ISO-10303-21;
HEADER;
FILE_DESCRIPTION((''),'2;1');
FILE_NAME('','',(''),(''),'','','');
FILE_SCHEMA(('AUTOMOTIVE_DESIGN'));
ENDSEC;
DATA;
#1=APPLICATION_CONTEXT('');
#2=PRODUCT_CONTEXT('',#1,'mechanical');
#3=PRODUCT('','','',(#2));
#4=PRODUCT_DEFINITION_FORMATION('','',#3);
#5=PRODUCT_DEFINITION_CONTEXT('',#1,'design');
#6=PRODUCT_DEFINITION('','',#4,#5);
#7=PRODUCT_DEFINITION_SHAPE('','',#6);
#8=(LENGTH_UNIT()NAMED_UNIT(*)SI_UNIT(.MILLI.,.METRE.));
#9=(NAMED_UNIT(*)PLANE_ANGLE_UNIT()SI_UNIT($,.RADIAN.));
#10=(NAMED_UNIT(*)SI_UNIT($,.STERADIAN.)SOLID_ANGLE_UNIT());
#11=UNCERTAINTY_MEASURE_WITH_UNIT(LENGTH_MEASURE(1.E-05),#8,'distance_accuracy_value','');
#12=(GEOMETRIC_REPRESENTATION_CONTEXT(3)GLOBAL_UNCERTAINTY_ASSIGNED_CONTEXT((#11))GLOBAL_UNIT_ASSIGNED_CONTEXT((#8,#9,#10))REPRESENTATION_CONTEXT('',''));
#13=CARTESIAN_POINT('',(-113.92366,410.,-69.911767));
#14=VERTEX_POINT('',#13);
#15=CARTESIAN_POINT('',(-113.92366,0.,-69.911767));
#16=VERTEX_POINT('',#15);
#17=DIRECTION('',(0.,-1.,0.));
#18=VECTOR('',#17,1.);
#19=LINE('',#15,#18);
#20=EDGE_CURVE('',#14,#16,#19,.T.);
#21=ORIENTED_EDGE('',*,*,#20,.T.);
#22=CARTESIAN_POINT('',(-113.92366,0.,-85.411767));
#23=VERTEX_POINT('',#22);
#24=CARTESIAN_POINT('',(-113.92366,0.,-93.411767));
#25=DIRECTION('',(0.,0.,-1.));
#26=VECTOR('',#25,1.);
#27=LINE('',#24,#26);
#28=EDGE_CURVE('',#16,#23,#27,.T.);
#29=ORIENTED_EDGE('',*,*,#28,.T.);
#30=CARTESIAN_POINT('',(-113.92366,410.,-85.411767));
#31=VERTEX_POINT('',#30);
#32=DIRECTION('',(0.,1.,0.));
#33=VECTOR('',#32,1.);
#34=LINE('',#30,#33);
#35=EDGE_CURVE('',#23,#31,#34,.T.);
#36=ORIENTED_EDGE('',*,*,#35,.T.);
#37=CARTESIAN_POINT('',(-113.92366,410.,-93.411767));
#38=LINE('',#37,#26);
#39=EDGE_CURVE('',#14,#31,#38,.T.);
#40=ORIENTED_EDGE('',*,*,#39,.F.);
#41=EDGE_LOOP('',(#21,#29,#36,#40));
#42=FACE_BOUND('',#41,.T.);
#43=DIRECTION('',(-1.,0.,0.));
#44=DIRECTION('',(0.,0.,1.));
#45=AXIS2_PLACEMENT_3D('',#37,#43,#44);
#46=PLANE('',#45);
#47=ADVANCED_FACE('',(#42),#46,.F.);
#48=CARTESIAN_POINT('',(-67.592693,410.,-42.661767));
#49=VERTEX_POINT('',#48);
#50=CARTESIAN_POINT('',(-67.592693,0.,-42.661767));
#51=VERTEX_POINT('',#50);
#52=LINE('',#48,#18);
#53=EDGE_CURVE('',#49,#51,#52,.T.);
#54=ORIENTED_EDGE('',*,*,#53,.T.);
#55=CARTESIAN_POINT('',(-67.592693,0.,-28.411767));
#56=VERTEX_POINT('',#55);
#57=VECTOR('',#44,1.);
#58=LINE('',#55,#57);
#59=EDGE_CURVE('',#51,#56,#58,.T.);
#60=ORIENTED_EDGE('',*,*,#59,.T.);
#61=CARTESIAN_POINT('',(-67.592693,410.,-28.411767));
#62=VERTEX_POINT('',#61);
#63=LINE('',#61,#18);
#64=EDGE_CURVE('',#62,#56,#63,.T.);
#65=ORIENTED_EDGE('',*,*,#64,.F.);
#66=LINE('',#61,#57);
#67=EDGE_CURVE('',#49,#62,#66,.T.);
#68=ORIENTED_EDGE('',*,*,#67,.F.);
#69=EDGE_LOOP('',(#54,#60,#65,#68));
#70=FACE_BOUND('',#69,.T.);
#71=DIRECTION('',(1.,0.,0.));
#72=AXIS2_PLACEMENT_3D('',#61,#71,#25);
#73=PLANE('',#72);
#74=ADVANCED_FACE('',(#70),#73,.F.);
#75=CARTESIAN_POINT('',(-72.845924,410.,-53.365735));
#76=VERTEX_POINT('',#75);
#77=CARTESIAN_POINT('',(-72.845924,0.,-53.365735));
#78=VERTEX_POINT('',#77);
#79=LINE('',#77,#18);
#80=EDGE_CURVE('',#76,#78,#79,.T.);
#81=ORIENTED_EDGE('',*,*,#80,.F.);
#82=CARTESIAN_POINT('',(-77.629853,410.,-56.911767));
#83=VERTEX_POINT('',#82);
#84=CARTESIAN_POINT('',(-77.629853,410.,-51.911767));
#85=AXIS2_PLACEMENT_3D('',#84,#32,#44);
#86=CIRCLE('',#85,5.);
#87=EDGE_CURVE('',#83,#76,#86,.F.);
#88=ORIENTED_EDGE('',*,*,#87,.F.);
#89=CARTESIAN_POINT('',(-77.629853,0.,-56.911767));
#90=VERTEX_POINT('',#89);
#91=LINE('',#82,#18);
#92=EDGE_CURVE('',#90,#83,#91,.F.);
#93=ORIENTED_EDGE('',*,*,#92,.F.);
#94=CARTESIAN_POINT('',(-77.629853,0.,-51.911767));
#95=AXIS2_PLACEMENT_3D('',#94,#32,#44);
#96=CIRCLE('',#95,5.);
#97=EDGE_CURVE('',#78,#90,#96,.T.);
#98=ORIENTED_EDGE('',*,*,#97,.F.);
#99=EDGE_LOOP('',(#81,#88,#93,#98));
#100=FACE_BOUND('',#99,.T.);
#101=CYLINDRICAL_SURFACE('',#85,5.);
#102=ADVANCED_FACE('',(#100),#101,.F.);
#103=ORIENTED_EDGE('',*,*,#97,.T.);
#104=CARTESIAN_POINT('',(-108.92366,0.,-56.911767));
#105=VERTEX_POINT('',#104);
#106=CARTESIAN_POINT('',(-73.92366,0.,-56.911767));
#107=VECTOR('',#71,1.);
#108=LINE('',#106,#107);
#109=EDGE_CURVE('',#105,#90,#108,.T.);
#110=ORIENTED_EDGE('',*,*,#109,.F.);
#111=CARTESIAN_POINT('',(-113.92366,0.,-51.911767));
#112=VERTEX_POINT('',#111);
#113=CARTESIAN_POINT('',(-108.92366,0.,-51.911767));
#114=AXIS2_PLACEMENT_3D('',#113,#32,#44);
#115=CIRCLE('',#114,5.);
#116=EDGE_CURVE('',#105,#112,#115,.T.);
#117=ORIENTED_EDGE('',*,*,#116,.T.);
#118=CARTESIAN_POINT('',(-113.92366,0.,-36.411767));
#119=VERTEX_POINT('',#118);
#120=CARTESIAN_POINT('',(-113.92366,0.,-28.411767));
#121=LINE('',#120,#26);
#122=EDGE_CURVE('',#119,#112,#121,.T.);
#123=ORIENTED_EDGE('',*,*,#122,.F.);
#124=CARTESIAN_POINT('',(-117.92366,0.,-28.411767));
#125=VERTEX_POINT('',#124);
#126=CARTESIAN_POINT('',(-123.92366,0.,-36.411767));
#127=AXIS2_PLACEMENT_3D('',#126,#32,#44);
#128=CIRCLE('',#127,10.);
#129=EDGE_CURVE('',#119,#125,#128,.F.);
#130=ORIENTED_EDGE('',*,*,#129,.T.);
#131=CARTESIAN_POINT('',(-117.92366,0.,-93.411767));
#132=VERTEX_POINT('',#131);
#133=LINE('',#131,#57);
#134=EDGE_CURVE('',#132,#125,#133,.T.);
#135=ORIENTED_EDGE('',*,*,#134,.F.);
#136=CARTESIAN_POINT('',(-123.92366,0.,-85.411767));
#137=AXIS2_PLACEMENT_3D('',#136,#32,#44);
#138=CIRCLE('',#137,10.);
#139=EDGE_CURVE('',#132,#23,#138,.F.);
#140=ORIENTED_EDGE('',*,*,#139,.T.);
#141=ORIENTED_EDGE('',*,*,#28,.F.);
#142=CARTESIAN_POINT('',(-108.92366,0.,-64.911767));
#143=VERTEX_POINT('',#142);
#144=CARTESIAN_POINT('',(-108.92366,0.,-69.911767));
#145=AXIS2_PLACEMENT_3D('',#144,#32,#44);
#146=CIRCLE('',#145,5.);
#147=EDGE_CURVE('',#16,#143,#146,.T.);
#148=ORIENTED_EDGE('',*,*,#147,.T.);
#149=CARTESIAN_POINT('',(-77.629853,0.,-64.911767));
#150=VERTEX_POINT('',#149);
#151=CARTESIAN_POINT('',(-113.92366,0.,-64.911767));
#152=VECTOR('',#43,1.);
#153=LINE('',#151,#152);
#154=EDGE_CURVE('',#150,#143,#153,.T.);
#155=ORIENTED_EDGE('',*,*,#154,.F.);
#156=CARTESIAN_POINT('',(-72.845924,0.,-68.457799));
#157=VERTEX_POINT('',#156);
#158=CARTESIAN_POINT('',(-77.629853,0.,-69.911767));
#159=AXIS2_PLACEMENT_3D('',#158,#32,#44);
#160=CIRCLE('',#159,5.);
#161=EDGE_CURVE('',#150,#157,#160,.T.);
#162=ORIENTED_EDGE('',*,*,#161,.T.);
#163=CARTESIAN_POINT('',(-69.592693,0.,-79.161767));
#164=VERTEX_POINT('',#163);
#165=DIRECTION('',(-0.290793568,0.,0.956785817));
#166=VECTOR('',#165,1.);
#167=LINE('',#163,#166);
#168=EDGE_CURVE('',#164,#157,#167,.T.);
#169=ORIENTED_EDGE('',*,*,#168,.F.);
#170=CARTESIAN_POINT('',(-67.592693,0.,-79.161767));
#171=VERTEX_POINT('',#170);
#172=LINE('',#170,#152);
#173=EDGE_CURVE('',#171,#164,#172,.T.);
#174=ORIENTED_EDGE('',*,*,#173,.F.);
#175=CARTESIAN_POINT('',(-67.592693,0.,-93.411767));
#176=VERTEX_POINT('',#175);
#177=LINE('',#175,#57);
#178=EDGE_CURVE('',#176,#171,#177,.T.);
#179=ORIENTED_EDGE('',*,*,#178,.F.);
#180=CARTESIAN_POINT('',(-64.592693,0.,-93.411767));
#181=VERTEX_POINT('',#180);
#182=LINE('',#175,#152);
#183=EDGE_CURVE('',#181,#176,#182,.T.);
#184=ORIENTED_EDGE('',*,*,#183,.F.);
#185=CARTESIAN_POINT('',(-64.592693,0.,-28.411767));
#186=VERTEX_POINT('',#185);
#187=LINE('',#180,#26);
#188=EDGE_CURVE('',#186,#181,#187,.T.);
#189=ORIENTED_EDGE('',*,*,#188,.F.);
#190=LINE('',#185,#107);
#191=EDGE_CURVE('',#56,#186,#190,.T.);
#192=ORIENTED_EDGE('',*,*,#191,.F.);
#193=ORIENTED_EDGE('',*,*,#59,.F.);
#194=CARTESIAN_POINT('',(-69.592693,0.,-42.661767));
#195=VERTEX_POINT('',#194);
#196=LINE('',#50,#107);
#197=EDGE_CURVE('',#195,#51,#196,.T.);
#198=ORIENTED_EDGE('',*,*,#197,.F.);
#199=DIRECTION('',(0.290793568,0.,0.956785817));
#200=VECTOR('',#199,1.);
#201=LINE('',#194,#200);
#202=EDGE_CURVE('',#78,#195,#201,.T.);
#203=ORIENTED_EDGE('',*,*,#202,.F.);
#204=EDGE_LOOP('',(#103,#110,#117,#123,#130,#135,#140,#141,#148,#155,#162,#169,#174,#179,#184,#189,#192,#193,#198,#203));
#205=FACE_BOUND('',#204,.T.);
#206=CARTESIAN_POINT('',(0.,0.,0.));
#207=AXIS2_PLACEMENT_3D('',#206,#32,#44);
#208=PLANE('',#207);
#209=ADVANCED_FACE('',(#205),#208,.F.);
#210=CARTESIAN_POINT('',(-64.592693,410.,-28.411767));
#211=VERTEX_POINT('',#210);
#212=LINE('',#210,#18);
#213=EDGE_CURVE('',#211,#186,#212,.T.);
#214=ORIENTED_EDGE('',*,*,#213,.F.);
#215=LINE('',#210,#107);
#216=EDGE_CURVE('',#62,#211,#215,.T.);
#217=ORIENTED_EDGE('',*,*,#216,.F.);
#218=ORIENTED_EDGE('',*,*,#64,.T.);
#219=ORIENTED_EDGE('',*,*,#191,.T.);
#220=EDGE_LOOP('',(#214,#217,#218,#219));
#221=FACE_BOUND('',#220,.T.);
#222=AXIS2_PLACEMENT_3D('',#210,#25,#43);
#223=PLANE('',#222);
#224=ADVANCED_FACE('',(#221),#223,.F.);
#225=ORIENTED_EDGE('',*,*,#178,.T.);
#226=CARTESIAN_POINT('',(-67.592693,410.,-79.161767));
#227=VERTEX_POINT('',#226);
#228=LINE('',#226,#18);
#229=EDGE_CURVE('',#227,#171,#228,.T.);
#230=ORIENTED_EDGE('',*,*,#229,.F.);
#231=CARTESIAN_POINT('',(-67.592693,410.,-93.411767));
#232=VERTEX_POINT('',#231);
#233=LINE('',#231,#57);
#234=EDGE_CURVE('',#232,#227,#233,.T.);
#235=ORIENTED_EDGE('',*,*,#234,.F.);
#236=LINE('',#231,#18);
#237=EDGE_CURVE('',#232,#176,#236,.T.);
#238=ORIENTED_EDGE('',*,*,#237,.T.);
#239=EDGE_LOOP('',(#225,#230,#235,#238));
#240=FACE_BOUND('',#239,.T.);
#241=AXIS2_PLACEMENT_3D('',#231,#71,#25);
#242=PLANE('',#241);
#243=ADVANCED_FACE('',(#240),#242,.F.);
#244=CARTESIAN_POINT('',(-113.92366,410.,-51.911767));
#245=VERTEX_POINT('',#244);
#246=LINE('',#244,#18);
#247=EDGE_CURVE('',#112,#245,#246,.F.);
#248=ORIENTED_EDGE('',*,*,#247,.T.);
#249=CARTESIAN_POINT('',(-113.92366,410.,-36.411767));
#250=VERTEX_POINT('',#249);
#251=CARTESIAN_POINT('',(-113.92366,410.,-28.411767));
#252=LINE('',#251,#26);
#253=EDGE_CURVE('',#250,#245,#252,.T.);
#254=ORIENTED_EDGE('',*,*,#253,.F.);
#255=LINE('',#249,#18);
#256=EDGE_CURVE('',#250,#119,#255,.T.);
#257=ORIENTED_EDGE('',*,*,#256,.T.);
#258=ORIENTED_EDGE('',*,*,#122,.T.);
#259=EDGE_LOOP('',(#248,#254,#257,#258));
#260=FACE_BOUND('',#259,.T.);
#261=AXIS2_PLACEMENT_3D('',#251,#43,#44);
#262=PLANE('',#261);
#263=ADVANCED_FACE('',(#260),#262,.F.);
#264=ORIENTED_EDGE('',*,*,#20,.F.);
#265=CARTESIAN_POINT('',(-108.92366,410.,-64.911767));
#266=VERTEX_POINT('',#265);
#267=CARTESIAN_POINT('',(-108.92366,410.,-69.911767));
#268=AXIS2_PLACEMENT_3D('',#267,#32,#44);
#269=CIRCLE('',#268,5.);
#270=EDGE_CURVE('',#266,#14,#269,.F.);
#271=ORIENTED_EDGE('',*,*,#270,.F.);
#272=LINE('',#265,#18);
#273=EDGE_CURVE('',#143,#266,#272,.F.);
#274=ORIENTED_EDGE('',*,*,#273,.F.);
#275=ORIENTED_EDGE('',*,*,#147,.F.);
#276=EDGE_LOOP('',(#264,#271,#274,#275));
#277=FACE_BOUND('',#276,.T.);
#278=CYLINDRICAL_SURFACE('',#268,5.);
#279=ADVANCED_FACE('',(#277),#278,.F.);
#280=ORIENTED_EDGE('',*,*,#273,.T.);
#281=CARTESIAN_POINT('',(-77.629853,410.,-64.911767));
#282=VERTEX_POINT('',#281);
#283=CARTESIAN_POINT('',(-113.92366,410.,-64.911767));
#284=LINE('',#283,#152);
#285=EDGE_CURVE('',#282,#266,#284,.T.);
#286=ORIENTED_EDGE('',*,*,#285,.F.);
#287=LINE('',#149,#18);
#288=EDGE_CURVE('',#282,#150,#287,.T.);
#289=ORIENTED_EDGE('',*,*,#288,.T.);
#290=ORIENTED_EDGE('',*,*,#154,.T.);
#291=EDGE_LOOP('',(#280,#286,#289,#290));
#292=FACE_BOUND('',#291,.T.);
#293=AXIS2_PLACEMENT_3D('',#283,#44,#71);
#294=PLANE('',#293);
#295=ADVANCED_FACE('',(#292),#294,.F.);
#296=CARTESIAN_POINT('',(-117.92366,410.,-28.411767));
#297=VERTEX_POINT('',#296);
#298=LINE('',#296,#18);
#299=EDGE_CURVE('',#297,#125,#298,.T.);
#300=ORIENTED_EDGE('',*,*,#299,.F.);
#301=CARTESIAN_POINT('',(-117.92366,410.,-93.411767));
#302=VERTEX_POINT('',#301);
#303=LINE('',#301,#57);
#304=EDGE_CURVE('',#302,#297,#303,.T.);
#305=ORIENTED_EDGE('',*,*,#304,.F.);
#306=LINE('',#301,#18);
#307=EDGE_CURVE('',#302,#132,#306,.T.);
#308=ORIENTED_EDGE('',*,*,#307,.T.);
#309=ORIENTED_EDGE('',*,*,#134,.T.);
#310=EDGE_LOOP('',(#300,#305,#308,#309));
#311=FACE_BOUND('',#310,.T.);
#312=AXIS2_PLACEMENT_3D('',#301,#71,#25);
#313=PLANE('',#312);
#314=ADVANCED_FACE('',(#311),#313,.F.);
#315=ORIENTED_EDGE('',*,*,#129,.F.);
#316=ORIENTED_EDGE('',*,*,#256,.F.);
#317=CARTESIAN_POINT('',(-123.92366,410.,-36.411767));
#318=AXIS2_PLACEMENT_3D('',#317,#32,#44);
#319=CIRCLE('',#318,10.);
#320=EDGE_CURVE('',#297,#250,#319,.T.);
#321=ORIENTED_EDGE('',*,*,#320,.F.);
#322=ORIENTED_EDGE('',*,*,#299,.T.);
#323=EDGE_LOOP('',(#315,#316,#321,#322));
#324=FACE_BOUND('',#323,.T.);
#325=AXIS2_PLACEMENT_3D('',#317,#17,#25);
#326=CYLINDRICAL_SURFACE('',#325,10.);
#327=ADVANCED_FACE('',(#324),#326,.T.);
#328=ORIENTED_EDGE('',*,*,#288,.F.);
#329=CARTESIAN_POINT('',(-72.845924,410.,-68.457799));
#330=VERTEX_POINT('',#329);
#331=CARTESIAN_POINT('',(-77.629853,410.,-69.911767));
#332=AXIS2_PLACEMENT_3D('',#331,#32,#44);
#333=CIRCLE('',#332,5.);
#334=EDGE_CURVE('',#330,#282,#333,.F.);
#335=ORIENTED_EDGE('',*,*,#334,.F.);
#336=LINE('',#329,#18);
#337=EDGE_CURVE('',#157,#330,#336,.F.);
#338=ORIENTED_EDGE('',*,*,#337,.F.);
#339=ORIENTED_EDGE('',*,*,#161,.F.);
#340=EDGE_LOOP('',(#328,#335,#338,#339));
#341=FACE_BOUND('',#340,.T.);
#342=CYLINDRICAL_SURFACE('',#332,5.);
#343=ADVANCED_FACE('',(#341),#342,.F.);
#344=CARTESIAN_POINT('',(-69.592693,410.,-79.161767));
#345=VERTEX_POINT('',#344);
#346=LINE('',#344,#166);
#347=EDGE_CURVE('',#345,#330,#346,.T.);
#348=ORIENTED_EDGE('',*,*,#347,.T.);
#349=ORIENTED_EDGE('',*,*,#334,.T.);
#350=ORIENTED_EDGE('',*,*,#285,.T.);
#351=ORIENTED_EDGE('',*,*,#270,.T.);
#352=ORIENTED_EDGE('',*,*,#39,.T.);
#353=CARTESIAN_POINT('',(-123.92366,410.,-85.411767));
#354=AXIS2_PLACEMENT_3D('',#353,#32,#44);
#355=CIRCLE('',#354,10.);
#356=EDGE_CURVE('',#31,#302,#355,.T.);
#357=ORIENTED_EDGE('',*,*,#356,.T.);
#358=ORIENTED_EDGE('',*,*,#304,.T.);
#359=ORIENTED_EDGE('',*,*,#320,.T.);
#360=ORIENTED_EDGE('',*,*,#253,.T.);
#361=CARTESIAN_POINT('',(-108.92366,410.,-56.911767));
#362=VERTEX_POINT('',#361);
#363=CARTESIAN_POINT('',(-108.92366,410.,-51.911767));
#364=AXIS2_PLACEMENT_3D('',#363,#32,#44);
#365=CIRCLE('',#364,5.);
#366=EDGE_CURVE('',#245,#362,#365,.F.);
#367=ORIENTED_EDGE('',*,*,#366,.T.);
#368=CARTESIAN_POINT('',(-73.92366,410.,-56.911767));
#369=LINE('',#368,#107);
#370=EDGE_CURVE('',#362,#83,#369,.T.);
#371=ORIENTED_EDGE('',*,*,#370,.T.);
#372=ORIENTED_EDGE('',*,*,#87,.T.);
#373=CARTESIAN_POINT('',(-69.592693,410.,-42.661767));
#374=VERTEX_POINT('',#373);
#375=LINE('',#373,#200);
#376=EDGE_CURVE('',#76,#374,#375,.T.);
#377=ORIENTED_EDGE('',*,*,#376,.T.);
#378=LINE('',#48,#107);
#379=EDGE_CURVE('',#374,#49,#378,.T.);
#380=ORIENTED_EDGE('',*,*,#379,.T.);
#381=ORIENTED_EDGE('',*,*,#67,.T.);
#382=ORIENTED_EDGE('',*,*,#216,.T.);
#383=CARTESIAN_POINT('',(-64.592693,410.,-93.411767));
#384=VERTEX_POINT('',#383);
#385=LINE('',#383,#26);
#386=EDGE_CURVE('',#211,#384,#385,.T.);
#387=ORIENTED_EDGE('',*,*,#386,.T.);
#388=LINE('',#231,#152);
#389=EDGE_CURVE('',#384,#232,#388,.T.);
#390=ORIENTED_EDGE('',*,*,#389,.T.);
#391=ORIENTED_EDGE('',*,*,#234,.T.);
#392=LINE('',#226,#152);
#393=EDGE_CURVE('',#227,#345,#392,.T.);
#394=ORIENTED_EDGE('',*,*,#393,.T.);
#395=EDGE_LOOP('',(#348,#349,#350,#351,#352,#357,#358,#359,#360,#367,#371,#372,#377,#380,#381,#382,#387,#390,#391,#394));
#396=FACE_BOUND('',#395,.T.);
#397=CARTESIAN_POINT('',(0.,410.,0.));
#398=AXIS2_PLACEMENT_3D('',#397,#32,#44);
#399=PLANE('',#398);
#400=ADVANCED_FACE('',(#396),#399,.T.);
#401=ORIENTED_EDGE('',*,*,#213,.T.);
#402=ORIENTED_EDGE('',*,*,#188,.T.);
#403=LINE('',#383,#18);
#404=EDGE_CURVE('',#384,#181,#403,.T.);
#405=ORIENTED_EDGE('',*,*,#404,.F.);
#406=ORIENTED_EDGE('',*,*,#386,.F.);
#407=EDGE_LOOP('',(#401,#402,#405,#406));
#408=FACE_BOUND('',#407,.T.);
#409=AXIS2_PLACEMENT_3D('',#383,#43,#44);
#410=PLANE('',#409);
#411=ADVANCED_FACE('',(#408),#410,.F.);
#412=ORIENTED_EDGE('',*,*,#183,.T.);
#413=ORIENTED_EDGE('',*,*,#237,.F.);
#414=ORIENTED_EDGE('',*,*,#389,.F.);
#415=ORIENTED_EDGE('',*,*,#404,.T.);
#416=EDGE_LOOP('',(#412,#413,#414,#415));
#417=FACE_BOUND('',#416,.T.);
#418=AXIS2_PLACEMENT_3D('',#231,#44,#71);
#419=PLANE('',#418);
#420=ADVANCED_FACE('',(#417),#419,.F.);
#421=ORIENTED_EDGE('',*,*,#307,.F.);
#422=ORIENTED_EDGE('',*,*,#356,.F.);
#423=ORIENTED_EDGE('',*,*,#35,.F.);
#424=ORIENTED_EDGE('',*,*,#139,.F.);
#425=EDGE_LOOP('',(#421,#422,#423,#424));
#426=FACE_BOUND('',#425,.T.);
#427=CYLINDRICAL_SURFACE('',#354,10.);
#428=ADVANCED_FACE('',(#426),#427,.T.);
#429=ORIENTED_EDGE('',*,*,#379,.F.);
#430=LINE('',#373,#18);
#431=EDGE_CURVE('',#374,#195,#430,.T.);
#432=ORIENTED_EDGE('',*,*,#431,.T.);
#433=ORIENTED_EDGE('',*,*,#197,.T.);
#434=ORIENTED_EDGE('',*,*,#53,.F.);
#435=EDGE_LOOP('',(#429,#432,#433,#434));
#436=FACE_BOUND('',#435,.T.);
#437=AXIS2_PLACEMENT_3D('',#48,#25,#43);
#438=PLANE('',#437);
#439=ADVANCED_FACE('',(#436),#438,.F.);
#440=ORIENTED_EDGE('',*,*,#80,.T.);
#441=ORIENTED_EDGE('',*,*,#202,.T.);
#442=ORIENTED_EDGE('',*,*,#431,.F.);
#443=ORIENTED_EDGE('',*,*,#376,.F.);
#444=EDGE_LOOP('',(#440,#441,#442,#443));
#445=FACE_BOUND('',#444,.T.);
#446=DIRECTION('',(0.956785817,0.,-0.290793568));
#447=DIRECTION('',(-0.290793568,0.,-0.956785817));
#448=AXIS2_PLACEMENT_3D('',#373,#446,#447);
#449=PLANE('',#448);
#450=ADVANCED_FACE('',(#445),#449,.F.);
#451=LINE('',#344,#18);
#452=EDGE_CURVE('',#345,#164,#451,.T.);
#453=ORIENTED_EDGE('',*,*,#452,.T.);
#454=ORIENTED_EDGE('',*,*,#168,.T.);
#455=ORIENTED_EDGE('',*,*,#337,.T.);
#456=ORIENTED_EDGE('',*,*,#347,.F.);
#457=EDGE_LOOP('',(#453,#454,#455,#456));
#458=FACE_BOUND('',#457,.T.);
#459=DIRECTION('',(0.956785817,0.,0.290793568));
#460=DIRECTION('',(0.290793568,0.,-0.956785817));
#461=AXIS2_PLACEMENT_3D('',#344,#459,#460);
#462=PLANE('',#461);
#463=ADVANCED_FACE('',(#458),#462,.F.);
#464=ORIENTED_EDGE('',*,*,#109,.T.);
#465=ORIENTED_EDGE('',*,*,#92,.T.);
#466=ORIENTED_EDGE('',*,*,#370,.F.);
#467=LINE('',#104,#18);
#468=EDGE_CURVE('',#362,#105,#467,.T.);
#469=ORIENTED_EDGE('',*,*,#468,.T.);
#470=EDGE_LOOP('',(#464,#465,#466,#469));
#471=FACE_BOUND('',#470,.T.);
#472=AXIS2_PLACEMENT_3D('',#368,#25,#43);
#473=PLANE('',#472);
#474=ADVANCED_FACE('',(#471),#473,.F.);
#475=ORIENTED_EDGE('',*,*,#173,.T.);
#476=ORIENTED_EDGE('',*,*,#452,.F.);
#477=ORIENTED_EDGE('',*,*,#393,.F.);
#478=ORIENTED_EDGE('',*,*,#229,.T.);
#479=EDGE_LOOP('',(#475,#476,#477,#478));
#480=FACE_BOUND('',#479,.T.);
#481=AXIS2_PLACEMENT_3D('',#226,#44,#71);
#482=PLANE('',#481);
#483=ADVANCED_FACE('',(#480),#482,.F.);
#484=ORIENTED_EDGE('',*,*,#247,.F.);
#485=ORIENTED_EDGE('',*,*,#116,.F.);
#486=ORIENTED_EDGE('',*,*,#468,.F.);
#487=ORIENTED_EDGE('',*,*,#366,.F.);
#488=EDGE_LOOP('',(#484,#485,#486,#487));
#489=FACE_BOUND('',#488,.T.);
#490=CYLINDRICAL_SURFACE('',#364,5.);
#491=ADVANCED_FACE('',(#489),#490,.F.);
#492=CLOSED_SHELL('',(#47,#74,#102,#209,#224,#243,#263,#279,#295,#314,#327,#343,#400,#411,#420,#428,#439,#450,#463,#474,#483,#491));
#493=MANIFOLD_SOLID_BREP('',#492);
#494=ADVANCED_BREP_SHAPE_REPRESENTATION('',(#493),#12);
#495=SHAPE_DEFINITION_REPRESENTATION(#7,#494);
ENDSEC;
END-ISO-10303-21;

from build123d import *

# Parameters (mm, degrees)
BOSS_EXTRUDE2_DEPTH = 410
FILLET1_R           = 10
FILLET2_R           = 5


with BuildPart() as part:
    # Sketch1 → Boss-Extrude2 (new body)
    with BuildSketch(Plane(origin=(0, 0, 0), x_dir=(1, 0, 0), z_dir=(0, 1, 0))):
        Polygon((-113.923660484, 64.911766887), (-73.923660484, 64.911766887), (-69.59269291, 79.161766887), (-67.59269291, 79.161766887), (-67.59269291, 93.411766887), (-64.59269291, 93.411766887), (-64.59269291, 28.411766887), (-67.59269291, 28.411766887), (-67.59269291, 42.661766887), (-69.59269291, 42.661766887), (-73.923660484, 56.911766887), (-113.923660484, 56.911766887), (-113.923660484, 28.411766887), (-117.923660484, 28.411766887), (-117.923660484, 93.411766887), (-113.923660484, 93.411766887), align=None)
    extrude(amount=BOSS_EXTRUDE2_DEPTH)

    # Fillet1
    # the kernel refuses this fillet: 10 mm, written as the material it takes off along each edge
    with BuildSketch(Plane(origin=(-113.923660484, -20, -93.411766887), x_dir=(-1, 0, 0), z_dir=(0, 1, 0))) as fillet1_piece_1:
        with BuildLine():
            CenterArc((10, 8), FILLET1_R, 180, 53.130102354)
            Line((0, 8), (-0.2, 8))
            Line((-0.2, 8), (-0.2, 0))
            Line((-0.2, 0), (0, -0.2))
            ThreePointArc((0, -0.2), (2, -0.2), (3.88, -0.16))
            Line((3.88, -0.16), (4, 0))
        make_face()
    extrude(amount=450, mode=Mode.SUBTRACT)
    with BuildSketch(Plane(origin=(-113.923660484, -20, -28.411766887), x_dir=(0, 0, -1), z_dir=(0, 1, 0))) as fillet1_piece_2:
        with BuildLine():
            CenterArc((8, 10), FILLET1_R, 216.869897646, 53.130102354)
            Line((0, 4), (-0.16, 3.88))
            ThreePointArc((-0.16, 3.88), (-0.2, 2), (-0.2, 0))
            Line((-0.2, 0), (0, -0.2))
            Line((0, -0.2), (8, -0.2))
            Line((8, -0.2), (8, 0))
        make_face()
    extrude(amount=450, mode=Mode.SUBTRACT)

    # Fillet2
    fillet2_edges = [part.edges().sort_by_distance(p)[0] for p in [
        (-113.923660484, 205, -64.911766887),
        (-73.923660484, 205, -64.911766887),
        (-73.923660484, 205, -56.911766887),
        (-113.923660484, 205, -56.911766887),
    ]]
    fillet(fillet2_edges, radius=FILLET2_R)


solid = part.part
